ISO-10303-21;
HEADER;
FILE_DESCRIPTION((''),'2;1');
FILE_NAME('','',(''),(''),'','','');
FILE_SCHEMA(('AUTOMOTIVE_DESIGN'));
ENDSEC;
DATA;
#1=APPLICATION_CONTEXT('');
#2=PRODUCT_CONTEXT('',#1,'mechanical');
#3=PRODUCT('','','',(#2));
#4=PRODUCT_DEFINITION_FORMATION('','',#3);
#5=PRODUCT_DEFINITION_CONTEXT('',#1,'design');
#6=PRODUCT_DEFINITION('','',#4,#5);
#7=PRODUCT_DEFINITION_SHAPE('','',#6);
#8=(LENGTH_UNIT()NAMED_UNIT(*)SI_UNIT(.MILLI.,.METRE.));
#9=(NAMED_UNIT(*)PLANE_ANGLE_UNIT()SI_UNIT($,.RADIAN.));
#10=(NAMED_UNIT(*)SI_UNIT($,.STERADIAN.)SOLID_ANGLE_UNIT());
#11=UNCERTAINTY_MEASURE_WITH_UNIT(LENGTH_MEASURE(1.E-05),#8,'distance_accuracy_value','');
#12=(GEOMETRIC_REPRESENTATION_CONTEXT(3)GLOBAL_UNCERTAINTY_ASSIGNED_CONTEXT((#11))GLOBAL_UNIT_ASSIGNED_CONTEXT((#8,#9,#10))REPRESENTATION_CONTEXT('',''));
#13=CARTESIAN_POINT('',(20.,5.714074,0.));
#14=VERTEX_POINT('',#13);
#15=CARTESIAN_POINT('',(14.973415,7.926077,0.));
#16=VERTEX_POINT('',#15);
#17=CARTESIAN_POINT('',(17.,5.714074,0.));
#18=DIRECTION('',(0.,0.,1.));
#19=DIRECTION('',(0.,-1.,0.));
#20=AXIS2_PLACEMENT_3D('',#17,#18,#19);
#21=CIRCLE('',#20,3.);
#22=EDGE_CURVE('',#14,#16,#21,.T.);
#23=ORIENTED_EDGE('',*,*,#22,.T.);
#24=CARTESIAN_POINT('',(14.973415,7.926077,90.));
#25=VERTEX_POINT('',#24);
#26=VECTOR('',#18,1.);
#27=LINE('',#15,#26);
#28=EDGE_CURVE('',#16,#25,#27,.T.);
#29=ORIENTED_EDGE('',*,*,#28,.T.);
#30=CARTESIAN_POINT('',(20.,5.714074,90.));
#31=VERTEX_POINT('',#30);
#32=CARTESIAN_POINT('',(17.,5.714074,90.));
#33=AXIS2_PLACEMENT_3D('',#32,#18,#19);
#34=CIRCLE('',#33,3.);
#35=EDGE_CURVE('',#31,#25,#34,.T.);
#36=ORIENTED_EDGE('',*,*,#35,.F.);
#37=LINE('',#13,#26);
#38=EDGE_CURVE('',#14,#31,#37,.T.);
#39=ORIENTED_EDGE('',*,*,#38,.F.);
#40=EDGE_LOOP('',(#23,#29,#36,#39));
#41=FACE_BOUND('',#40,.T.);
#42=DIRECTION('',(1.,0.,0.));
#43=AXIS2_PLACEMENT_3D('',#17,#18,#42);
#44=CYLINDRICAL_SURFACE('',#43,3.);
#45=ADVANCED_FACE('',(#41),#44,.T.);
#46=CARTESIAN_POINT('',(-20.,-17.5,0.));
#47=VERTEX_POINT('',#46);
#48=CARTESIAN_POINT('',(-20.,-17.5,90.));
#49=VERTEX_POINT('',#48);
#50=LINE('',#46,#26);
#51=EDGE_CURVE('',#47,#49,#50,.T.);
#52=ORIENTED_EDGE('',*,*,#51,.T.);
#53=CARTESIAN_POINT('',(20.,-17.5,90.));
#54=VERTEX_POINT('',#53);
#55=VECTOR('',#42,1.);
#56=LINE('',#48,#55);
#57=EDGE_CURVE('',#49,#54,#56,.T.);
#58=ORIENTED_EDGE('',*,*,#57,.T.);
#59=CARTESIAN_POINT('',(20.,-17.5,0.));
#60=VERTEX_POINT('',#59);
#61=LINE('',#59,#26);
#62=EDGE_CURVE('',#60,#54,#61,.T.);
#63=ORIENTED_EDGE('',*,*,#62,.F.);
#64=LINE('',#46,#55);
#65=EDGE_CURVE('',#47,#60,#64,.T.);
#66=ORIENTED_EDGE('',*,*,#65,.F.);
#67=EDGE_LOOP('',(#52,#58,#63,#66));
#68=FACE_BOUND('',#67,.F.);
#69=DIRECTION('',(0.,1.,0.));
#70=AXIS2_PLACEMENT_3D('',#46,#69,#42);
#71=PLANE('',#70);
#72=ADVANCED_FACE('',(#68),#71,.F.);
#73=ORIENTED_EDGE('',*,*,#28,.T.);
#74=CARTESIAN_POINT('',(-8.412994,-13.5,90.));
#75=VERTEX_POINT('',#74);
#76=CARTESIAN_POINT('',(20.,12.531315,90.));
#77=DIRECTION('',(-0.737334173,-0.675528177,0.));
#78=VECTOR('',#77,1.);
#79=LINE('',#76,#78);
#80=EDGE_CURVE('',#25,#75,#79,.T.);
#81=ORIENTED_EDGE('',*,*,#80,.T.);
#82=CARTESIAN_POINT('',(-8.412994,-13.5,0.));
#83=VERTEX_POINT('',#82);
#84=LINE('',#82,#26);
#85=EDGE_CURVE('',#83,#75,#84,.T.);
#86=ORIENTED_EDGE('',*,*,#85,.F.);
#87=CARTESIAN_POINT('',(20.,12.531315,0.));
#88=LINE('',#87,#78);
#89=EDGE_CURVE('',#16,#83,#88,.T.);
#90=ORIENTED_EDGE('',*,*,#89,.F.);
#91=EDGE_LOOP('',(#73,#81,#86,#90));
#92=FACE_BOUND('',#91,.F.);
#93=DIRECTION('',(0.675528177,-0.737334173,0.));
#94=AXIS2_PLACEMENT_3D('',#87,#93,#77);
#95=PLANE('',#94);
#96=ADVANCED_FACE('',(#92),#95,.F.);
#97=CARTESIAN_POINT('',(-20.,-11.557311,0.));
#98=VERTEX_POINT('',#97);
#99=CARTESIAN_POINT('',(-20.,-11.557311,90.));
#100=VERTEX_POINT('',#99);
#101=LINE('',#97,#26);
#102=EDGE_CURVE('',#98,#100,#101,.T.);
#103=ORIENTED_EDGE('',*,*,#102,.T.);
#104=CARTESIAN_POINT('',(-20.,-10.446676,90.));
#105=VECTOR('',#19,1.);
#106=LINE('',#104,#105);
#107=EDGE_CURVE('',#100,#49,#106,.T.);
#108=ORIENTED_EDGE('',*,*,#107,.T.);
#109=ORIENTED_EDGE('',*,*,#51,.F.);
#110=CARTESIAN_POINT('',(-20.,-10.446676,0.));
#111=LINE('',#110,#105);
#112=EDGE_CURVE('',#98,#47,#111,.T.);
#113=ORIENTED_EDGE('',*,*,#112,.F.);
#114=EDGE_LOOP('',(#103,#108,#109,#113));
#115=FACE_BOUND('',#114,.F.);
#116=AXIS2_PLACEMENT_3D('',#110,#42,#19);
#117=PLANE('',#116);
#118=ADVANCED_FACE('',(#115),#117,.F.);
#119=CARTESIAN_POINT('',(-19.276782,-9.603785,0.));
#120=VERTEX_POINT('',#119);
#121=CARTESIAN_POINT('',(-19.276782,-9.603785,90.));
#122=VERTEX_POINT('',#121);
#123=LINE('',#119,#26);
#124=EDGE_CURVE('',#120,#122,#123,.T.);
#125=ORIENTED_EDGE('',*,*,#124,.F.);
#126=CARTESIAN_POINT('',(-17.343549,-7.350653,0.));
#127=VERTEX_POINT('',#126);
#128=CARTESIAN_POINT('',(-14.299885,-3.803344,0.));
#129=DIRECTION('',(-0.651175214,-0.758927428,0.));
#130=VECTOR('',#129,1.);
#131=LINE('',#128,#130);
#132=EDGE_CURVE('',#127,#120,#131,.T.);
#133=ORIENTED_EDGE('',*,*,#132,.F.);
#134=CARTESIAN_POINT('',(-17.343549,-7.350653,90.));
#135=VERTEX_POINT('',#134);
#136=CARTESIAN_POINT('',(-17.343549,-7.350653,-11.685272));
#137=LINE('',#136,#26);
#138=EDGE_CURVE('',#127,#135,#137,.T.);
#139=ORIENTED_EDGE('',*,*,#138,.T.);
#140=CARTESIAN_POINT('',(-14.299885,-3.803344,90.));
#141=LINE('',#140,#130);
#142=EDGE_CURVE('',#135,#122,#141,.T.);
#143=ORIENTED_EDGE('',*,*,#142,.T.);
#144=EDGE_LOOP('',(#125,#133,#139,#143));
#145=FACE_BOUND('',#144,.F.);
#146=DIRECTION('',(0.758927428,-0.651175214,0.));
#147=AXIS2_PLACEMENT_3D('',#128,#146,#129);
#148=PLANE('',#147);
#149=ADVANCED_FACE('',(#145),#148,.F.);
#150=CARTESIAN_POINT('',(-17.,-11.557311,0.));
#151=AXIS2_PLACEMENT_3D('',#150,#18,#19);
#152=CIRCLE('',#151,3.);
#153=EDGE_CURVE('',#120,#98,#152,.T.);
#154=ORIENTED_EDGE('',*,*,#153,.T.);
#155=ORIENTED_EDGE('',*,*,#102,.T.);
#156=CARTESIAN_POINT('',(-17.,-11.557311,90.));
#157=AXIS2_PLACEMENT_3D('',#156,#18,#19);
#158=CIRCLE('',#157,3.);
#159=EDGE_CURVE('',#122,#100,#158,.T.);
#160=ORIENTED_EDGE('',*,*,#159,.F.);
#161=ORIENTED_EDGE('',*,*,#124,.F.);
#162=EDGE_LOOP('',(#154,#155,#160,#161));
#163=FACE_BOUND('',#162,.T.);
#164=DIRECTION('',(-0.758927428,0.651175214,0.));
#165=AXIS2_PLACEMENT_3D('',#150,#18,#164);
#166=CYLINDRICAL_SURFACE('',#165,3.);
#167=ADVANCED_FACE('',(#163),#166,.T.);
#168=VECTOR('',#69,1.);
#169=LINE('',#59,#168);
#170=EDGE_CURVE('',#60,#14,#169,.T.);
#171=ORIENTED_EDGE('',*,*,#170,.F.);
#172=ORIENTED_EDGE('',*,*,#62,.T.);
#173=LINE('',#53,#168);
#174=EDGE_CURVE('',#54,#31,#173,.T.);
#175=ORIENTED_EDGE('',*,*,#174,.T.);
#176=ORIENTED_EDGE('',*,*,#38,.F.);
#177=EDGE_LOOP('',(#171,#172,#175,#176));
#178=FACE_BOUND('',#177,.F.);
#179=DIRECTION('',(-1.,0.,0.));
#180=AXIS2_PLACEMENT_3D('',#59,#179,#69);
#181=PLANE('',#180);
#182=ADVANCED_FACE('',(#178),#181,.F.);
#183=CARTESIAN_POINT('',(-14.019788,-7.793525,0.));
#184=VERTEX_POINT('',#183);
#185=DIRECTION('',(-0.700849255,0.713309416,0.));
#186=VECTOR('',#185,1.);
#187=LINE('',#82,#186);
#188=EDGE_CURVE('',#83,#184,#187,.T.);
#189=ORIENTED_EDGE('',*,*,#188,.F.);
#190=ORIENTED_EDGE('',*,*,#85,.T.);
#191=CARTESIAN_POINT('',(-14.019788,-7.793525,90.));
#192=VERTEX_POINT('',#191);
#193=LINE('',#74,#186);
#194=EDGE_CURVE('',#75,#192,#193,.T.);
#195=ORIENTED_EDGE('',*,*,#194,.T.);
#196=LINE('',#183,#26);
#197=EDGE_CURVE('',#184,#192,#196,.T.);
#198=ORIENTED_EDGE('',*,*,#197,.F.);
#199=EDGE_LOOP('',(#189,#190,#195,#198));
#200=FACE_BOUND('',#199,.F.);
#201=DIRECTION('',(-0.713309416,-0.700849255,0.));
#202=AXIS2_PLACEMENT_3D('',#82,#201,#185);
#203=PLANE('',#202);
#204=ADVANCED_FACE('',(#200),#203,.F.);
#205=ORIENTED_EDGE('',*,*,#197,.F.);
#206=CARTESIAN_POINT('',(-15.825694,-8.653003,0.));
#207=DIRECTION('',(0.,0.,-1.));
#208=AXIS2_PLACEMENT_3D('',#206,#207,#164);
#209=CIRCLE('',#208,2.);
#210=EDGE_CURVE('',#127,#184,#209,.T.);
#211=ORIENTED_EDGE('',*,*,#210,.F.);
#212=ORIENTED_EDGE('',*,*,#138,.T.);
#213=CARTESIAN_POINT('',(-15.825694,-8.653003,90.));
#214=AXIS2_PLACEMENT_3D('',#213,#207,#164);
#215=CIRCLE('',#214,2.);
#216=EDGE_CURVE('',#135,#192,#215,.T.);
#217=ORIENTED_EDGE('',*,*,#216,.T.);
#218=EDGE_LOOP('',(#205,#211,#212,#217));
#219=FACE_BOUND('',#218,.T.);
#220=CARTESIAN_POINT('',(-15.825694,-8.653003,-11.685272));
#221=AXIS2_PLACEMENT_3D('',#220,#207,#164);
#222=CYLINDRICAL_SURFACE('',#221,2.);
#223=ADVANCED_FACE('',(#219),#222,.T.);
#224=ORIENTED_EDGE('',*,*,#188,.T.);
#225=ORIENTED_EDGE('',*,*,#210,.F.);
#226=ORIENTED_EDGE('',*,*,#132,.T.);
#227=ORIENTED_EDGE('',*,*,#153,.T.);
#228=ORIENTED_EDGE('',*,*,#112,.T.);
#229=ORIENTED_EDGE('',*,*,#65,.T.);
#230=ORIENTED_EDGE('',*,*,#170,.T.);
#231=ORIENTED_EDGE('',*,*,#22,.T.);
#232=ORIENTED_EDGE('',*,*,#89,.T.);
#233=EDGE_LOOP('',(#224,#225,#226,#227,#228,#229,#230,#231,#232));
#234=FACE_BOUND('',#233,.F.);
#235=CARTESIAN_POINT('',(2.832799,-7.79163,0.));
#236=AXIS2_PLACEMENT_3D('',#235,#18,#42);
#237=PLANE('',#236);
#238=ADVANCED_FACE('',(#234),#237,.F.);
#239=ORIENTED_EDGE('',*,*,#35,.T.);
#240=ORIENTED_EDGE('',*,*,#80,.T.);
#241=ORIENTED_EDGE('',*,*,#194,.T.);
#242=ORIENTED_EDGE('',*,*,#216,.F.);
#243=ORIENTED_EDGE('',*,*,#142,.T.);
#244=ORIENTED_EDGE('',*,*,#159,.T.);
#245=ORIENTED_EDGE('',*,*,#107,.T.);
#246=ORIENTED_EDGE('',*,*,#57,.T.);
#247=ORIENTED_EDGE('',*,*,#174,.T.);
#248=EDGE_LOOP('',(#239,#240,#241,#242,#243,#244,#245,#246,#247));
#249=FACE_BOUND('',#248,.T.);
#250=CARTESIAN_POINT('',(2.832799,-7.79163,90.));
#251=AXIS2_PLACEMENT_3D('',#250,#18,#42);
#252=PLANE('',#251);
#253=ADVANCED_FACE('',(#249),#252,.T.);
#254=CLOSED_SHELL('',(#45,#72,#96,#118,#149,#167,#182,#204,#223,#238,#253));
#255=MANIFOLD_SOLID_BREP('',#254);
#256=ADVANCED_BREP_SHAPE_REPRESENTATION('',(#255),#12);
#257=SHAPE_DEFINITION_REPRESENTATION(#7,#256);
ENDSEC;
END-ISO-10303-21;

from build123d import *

# Parameters (mm, degrees)
F1_DEPTH    = 90
F2_R        = 3
F3_T1_DEPTH = 113.3705433716


# Not quite as in the source:
# - a fillet or chamfer that OpenCascade refuses, or shapes differently, is made with other operations: its cross-section is extruded or revolved along the edge and cut away or added


with BuildPart() as f1:
    # F0 (on Top) → F1 (new body)
    with BuildSketch(Plane.XY):
        Polygon((-20, -17.5), (20, -17.5), (20, 12.5313148581), (-8.4129939735, -13.5), (-14.0197880107, -7.7935246759), (-14.2998851884, -3.8033435308), (-20, -10.4466760531), align=None)
    extrude(amount=F1_DEPTH)

    # F2
    f2_edges = [f1.edges().sort_by_distance(p)[0] for p in [
        (-20, -10.446676, 45),
        (20, 12.531315, 45),
    ]]
    fillet(f2_edges, radius=F2_R)

    # F3: fillet of radius 2 on 1 edges, made by hand

    # F3_s2 → F3_t1 (cut)
    with BuildSketch(Plane.XY.offset(-11.6852716858)):
        with BuildLine():
            ThreePointArc((-17.3435489028, -7.3506528059), (-15.5615402204, -6.6705242909), (-14.0197880107, -7.7935246759))
            Line((-14.0197880107, -7.7935246759), (-14.2998851884, -3.8033435308))
            Line((-14.2998851884, -3.8033435308), (-17.3435489028, -7.3506528059))
        make_face()
    extrude(amount=F3_T1_DEPTH, mode=Mode.SUBTRACT)


solid = f1.part
